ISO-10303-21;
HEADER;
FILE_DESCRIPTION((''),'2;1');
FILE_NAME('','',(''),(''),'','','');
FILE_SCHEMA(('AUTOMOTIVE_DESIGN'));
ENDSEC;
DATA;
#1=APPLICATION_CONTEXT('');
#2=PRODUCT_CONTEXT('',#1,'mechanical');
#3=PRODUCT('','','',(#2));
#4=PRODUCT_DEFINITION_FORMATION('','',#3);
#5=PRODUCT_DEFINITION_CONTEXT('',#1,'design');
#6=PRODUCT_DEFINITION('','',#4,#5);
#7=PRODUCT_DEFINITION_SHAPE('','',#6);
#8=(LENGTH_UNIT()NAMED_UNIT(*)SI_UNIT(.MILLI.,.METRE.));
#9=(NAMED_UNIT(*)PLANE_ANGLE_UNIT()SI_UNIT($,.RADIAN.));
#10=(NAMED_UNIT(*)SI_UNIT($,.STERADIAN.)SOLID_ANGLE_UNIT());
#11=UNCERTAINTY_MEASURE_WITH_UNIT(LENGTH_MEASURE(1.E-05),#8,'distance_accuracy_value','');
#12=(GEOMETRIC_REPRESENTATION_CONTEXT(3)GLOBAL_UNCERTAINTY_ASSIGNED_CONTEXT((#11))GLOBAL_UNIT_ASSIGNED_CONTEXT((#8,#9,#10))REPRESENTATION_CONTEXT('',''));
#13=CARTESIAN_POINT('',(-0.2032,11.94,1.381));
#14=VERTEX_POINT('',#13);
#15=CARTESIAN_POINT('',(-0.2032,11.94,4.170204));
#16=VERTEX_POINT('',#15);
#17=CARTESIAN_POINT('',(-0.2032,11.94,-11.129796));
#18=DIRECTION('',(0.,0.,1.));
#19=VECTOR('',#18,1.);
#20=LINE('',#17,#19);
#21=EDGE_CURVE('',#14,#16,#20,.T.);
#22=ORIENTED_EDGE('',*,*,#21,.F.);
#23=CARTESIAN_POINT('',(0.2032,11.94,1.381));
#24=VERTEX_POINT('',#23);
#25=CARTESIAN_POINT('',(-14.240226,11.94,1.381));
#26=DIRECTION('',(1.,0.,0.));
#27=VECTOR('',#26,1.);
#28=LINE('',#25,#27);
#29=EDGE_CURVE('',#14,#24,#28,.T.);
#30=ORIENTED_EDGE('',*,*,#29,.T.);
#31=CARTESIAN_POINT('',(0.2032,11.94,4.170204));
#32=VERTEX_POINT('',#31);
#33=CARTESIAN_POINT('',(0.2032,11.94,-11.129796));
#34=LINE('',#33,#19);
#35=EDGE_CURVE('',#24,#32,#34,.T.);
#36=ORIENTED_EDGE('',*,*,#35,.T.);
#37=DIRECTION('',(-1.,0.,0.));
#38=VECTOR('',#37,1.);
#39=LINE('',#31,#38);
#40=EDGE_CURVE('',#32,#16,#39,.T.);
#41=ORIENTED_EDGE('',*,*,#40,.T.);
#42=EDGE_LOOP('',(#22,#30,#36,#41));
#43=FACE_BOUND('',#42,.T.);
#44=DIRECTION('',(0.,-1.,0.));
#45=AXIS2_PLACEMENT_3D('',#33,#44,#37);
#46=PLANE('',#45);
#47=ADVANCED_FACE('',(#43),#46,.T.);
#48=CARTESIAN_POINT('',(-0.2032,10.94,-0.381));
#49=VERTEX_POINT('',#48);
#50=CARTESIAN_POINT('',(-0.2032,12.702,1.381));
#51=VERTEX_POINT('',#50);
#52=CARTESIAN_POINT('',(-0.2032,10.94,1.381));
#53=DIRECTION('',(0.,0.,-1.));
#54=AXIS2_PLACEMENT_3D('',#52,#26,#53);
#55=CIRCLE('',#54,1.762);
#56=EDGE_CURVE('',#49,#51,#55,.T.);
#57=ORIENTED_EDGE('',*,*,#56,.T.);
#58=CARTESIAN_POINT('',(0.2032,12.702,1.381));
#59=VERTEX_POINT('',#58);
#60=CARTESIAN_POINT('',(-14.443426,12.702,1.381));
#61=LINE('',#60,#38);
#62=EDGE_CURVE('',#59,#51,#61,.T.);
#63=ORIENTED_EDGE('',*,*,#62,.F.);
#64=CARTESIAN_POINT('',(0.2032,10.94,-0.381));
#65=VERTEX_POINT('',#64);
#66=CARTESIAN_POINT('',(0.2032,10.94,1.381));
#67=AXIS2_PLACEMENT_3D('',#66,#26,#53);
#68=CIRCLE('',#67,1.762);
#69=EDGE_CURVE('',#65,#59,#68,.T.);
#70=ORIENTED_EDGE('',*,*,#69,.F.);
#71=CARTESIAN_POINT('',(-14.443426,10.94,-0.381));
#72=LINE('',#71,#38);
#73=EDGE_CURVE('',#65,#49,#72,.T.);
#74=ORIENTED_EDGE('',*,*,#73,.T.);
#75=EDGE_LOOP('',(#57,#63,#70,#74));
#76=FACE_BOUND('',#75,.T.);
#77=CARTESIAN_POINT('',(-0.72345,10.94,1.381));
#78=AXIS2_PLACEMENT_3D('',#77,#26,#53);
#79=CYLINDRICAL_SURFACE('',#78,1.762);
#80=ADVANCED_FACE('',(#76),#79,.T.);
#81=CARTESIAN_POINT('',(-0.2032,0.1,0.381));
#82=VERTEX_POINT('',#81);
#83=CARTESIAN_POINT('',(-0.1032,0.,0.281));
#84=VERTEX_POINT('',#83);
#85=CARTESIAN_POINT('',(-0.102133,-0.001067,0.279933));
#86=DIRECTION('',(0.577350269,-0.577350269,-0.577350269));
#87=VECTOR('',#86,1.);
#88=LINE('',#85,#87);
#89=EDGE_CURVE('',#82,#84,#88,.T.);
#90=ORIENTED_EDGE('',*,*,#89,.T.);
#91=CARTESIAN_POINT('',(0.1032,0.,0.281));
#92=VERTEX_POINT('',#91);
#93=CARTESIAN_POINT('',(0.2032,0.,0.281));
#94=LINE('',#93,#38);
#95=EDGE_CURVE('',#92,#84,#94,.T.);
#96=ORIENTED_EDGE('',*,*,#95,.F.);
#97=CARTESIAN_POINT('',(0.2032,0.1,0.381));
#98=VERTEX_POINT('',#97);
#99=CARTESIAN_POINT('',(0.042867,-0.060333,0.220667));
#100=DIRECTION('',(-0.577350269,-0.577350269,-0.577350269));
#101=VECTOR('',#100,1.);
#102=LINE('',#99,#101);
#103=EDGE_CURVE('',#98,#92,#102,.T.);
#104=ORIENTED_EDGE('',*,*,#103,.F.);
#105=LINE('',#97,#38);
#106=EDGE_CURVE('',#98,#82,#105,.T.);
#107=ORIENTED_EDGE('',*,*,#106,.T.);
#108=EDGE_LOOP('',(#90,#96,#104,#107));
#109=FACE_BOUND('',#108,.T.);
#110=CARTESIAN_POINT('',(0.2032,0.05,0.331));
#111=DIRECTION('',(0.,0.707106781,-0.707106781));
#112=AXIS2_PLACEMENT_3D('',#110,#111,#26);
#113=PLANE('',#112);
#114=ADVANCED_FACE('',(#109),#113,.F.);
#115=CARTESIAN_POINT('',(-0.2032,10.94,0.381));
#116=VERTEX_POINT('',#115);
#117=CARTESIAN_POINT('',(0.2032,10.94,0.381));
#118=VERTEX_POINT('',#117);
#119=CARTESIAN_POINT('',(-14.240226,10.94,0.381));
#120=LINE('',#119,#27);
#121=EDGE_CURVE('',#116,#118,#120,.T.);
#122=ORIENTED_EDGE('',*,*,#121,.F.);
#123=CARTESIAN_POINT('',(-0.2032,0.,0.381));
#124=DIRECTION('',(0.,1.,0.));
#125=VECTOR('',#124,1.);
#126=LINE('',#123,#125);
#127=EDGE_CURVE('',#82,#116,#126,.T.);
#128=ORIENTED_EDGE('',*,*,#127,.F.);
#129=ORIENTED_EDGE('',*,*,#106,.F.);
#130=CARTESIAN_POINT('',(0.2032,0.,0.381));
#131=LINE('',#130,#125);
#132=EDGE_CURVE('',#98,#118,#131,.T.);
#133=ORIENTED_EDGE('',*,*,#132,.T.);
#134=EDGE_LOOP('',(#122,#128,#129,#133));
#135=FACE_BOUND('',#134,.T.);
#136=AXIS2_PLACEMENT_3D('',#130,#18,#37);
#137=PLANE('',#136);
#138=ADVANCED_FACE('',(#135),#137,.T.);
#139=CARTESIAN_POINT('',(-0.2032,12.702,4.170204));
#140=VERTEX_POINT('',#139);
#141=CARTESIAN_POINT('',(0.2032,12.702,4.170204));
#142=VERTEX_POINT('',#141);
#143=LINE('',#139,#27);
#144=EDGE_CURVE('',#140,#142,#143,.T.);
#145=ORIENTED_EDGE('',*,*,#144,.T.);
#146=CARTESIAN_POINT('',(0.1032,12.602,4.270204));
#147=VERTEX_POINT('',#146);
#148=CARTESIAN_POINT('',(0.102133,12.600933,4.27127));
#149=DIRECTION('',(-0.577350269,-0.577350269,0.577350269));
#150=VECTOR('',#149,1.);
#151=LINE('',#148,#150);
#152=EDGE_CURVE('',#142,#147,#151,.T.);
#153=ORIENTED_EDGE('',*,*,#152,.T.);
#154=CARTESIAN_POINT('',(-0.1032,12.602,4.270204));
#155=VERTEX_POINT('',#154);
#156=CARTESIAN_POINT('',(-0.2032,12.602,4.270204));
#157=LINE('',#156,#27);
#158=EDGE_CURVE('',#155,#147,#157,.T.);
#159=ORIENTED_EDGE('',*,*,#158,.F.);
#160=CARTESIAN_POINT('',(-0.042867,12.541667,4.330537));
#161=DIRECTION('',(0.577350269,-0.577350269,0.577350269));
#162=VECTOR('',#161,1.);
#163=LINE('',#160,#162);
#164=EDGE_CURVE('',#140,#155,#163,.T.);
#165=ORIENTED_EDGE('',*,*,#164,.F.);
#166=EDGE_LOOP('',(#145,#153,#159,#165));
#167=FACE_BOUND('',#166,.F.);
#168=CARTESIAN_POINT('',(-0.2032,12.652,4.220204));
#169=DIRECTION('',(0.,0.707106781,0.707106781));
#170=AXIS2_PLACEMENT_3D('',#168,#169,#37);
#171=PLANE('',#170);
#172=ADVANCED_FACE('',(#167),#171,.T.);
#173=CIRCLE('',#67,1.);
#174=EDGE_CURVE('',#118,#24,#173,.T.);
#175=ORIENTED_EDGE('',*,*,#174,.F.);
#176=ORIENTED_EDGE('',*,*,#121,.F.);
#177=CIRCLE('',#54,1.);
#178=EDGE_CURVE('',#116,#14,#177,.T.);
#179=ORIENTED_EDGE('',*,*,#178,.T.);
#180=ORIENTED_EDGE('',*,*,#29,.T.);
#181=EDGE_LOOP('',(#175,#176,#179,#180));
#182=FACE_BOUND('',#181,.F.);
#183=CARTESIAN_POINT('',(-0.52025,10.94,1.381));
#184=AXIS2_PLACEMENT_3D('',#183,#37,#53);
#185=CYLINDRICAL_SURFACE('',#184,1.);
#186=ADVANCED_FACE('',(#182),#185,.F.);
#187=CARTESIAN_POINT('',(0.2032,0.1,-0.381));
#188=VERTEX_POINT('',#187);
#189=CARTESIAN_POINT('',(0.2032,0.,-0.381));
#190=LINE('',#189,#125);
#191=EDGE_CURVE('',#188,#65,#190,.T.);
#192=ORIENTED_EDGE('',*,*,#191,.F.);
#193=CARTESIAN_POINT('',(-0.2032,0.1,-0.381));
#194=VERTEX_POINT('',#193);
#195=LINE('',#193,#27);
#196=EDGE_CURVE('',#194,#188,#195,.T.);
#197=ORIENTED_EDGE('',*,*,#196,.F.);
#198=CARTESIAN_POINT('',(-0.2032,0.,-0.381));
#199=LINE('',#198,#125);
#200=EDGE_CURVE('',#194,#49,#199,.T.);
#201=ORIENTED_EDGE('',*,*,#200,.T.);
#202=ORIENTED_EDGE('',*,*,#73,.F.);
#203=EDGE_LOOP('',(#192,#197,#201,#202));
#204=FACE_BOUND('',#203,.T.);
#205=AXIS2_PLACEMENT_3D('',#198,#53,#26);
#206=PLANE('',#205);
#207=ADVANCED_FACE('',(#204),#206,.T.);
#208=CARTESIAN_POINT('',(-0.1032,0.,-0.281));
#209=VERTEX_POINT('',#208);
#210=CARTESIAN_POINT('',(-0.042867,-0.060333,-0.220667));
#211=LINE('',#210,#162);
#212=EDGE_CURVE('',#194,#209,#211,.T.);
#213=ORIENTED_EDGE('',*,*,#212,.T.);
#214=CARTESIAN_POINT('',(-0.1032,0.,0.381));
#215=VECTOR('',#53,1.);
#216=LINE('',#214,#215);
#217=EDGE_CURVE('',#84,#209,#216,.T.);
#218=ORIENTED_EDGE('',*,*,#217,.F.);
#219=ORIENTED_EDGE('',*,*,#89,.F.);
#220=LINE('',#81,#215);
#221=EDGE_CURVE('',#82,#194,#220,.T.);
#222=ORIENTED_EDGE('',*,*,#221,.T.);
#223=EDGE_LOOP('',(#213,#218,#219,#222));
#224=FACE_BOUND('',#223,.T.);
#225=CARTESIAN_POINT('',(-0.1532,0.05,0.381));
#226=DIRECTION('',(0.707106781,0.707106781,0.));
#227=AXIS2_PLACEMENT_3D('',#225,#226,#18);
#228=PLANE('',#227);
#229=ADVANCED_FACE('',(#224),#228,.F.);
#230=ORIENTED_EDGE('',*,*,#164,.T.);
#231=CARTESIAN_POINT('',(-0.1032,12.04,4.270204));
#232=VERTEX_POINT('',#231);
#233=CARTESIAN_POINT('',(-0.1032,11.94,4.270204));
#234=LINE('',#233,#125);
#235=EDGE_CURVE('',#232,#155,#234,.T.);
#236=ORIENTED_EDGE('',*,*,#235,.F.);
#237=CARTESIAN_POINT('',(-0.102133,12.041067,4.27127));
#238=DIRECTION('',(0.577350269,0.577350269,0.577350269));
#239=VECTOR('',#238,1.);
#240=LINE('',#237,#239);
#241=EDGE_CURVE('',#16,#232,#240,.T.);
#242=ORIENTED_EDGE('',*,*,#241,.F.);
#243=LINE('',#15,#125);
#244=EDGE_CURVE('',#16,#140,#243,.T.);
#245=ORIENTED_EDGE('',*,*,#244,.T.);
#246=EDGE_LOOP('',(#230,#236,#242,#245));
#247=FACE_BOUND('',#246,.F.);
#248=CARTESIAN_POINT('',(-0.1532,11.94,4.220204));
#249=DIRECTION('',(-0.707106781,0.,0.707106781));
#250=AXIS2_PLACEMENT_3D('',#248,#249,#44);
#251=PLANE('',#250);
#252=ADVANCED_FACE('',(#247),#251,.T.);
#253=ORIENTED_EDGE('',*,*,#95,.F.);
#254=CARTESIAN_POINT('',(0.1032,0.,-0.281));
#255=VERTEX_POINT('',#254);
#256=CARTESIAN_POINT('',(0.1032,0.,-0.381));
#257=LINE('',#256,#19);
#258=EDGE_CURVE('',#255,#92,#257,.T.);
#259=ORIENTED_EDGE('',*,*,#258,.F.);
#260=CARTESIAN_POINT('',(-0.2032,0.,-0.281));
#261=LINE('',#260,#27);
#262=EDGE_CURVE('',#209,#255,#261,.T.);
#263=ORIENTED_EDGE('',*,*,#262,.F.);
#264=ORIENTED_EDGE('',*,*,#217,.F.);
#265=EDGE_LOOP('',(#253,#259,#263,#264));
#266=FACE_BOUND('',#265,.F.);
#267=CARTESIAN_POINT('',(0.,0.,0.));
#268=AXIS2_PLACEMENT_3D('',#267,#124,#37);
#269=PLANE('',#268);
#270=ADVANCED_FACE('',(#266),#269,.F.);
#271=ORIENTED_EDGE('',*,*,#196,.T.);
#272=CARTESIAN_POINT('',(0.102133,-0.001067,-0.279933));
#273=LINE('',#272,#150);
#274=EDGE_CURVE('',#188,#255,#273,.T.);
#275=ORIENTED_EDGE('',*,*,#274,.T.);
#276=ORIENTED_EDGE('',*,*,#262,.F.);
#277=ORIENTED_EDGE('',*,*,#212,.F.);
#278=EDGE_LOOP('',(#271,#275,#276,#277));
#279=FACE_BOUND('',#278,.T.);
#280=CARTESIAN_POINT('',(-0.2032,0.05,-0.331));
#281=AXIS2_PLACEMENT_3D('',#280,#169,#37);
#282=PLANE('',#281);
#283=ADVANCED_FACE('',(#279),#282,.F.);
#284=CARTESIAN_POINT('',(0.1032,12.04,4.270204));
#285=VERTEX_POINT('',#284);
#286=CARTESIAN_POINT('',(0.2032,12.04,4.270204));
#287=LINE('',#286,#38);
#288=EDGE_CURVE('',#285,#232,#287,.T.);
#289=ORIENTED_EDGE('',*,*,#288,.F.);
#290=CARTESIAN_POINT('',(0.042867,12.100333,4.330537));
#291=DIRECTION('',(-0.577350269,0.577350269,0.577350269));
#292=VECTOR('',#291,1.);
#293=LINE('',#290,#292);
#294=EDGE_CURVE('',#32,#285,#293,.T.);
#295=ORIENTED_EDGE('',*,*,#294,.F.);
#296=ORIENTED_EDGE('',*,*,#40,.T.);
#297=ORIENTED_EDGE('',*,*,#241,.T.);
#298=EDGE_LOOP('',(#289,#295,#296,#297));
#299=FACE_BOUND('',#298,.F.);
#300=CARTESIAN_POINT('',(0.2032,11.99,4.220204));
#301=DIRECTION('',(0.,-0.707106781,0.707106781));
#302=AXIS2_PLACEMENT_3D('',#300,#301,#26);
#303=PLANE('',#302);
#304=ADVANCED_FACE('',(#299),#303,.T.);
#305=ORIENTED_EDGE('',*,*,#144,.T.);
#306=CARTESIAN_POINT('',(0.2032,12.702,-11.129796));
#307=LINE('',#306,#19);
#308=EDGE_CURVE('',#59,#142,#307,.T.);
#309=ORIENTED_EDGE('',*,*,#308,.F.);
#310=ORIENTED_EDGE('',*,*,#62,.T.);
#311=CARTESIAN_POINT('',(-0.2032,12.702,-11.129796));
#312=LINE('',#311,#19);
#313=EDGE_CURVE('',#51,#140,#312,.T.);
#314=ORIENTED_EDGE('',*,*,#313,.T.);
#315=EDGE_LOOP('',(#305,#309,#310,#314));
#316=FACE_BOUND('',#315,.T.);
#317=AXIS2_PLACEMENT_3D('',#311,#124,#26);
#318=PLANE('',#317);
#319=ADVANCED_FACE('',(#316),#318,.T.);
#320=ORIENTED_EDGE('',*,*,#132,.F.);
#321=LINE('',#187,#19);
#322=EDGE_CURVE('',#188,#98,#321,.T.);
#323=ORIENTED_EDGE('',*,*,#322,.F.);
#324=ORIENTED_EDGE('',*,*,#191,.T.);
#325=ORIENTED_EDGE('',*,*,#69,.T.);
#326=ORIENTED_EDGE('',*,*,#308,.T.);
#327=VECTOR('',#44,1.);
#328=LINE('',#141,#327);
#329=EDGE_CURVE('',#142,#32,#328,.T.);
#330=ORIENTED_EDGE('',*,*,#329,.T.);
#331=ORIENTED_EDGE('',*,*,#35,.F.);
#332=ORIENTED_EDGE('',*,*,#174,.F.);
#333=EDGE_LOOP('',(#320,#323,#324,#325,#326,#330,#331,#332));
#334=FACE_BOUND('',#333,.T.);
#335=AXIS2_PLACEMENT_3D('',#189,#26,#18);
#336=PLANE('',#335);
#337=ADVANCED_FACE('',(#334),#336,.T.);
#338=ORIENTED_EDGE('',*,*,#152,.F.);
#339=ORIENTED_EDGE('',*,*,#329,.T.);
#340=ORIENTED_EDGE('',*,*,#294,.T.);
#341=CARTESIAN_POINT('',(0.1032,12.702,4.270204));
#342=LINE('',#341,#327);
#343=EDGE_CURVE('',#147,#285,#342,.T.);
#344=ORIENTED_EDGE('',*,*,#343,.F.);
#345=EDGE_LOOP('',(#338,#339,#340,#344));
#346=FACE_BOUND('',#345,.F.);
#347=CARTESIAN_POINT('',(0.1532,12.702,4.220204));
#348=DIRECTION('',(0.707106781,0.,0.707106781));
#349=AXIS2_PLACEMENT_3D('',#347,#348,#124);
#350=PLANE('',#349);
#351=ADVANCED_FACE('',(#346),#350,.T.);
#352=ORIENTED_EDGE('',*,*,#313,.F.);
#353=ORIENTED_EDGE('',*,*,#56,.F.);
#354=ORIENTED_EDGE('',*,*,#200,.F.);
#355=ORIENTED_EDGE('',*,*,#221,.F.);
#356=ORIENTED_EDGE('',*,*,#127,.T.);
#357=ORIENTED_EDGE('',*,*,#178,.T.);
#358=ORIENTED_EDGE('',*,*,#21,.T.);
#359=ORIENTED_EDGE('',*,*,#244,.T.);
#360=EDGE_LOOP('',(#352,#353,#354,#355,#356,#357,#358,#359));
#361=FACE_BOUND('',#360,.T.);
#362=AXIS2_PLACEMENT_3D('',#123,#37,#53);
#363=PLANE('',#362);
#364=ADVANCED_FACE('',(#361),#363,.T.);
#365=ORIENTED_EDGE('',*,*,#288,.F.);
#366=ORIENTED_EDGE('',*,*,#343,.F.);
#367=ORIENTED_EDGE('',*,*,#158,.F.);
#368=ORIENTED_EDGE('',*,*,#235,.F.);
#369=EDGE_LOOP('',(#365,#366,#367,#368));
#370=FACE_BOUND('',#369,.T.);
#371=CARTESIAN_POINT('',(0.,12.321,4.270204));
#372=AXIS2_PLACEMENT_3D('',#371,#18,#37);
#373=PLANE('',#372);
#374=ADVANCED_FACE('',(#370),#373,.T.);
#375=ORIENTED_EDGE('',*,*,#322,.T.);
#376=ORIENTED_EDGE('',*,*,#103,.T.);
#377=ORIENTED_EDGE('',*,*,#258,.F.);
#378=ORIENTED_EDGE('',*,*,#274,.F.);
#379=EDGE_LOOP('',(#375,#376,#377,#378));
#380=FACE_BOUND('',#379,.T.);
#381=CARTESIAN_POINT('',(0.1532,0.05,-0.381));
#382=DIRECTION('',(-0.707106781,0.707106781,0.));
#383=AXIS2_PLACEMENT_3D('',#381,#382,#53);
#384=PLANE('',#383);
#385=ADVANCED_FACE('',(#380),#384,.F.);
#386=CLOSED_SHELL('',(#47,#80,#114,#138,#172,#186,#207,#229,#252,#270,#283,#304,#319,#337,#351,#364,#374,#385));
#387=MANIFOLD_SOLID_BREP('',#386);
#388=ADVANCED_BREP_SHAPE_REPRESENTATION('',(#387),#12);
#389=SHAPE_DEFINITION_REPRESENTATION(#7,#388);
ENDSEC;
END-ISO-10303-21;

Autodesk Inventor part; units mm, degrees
ref_plane "YZ Plane" through (0, 0, 0) normal (1, 0, 0) x (0, 1, 0)
ref_plane "XZ Plane" through (0, 0, 0) normal (0, 1, 0) x (-1, 0, 0)
ref_plane "XY Plane" through (0, 0, 0) normal (0, 0, 1) x (1, 0, 0)
sketch "Sketch1" plane through (0, 0, 0) normal (0, 1, 0) x (-1, 0, 0)
  line L0 (0.2032, -0.381) -> (-0.2032, -0.381)
  line L1 (-0.2032, -0.381) -> (-0.2032, 0.381)
  line L2 (-0.2032, 0.381) -> (0.2032, 0.381)
  line L3 (0.2032, 0.381) -> (0.2032, -0.381)
  line L4 (0.2032, -0.381) -> (-0.2032, 0.381) construction
  line L5 (-0.2032, -0.381) -> (0.2032, 0.381) construction
  point P0 (0, 0)
  dimension "d0" = 0.4064
  dimension "d1" = 0.762
extrude "Extrusion1" add sketch "Sketch1" along normal blind 15.4
chamfer "Chamfer1" distance 0.1 angle 45 8 edges at (0.2032, 15.4, 0) (0, 15.4, -0.381) (0, 15.4, 0.381) (-0.2032, 15.4, 0) (0.2032, 0, 0) (0, 0, -0.381) (0, 0, 0.381) (-0.2032, 0, 0)
sketch "Sketch2" plane through (-0.2032, 0.1, 0.381) normal (0, 0, 1) x (1, 0, 0)
  line L0 (-1.0405, 10.84) -> (1.7368, 10.84)
  point P0 (0.2032, -0.1)
  dimension "d7" = 10.94
bend part "Bend Part1" radius 1 angle 90 line through (-1.2437, 10.94, 0.381) along (1, 0, 0) centre toward (0, 0, 1) moving side (0, 1, 0) both sides no
properties part number "PinRight2" material "Gold"
